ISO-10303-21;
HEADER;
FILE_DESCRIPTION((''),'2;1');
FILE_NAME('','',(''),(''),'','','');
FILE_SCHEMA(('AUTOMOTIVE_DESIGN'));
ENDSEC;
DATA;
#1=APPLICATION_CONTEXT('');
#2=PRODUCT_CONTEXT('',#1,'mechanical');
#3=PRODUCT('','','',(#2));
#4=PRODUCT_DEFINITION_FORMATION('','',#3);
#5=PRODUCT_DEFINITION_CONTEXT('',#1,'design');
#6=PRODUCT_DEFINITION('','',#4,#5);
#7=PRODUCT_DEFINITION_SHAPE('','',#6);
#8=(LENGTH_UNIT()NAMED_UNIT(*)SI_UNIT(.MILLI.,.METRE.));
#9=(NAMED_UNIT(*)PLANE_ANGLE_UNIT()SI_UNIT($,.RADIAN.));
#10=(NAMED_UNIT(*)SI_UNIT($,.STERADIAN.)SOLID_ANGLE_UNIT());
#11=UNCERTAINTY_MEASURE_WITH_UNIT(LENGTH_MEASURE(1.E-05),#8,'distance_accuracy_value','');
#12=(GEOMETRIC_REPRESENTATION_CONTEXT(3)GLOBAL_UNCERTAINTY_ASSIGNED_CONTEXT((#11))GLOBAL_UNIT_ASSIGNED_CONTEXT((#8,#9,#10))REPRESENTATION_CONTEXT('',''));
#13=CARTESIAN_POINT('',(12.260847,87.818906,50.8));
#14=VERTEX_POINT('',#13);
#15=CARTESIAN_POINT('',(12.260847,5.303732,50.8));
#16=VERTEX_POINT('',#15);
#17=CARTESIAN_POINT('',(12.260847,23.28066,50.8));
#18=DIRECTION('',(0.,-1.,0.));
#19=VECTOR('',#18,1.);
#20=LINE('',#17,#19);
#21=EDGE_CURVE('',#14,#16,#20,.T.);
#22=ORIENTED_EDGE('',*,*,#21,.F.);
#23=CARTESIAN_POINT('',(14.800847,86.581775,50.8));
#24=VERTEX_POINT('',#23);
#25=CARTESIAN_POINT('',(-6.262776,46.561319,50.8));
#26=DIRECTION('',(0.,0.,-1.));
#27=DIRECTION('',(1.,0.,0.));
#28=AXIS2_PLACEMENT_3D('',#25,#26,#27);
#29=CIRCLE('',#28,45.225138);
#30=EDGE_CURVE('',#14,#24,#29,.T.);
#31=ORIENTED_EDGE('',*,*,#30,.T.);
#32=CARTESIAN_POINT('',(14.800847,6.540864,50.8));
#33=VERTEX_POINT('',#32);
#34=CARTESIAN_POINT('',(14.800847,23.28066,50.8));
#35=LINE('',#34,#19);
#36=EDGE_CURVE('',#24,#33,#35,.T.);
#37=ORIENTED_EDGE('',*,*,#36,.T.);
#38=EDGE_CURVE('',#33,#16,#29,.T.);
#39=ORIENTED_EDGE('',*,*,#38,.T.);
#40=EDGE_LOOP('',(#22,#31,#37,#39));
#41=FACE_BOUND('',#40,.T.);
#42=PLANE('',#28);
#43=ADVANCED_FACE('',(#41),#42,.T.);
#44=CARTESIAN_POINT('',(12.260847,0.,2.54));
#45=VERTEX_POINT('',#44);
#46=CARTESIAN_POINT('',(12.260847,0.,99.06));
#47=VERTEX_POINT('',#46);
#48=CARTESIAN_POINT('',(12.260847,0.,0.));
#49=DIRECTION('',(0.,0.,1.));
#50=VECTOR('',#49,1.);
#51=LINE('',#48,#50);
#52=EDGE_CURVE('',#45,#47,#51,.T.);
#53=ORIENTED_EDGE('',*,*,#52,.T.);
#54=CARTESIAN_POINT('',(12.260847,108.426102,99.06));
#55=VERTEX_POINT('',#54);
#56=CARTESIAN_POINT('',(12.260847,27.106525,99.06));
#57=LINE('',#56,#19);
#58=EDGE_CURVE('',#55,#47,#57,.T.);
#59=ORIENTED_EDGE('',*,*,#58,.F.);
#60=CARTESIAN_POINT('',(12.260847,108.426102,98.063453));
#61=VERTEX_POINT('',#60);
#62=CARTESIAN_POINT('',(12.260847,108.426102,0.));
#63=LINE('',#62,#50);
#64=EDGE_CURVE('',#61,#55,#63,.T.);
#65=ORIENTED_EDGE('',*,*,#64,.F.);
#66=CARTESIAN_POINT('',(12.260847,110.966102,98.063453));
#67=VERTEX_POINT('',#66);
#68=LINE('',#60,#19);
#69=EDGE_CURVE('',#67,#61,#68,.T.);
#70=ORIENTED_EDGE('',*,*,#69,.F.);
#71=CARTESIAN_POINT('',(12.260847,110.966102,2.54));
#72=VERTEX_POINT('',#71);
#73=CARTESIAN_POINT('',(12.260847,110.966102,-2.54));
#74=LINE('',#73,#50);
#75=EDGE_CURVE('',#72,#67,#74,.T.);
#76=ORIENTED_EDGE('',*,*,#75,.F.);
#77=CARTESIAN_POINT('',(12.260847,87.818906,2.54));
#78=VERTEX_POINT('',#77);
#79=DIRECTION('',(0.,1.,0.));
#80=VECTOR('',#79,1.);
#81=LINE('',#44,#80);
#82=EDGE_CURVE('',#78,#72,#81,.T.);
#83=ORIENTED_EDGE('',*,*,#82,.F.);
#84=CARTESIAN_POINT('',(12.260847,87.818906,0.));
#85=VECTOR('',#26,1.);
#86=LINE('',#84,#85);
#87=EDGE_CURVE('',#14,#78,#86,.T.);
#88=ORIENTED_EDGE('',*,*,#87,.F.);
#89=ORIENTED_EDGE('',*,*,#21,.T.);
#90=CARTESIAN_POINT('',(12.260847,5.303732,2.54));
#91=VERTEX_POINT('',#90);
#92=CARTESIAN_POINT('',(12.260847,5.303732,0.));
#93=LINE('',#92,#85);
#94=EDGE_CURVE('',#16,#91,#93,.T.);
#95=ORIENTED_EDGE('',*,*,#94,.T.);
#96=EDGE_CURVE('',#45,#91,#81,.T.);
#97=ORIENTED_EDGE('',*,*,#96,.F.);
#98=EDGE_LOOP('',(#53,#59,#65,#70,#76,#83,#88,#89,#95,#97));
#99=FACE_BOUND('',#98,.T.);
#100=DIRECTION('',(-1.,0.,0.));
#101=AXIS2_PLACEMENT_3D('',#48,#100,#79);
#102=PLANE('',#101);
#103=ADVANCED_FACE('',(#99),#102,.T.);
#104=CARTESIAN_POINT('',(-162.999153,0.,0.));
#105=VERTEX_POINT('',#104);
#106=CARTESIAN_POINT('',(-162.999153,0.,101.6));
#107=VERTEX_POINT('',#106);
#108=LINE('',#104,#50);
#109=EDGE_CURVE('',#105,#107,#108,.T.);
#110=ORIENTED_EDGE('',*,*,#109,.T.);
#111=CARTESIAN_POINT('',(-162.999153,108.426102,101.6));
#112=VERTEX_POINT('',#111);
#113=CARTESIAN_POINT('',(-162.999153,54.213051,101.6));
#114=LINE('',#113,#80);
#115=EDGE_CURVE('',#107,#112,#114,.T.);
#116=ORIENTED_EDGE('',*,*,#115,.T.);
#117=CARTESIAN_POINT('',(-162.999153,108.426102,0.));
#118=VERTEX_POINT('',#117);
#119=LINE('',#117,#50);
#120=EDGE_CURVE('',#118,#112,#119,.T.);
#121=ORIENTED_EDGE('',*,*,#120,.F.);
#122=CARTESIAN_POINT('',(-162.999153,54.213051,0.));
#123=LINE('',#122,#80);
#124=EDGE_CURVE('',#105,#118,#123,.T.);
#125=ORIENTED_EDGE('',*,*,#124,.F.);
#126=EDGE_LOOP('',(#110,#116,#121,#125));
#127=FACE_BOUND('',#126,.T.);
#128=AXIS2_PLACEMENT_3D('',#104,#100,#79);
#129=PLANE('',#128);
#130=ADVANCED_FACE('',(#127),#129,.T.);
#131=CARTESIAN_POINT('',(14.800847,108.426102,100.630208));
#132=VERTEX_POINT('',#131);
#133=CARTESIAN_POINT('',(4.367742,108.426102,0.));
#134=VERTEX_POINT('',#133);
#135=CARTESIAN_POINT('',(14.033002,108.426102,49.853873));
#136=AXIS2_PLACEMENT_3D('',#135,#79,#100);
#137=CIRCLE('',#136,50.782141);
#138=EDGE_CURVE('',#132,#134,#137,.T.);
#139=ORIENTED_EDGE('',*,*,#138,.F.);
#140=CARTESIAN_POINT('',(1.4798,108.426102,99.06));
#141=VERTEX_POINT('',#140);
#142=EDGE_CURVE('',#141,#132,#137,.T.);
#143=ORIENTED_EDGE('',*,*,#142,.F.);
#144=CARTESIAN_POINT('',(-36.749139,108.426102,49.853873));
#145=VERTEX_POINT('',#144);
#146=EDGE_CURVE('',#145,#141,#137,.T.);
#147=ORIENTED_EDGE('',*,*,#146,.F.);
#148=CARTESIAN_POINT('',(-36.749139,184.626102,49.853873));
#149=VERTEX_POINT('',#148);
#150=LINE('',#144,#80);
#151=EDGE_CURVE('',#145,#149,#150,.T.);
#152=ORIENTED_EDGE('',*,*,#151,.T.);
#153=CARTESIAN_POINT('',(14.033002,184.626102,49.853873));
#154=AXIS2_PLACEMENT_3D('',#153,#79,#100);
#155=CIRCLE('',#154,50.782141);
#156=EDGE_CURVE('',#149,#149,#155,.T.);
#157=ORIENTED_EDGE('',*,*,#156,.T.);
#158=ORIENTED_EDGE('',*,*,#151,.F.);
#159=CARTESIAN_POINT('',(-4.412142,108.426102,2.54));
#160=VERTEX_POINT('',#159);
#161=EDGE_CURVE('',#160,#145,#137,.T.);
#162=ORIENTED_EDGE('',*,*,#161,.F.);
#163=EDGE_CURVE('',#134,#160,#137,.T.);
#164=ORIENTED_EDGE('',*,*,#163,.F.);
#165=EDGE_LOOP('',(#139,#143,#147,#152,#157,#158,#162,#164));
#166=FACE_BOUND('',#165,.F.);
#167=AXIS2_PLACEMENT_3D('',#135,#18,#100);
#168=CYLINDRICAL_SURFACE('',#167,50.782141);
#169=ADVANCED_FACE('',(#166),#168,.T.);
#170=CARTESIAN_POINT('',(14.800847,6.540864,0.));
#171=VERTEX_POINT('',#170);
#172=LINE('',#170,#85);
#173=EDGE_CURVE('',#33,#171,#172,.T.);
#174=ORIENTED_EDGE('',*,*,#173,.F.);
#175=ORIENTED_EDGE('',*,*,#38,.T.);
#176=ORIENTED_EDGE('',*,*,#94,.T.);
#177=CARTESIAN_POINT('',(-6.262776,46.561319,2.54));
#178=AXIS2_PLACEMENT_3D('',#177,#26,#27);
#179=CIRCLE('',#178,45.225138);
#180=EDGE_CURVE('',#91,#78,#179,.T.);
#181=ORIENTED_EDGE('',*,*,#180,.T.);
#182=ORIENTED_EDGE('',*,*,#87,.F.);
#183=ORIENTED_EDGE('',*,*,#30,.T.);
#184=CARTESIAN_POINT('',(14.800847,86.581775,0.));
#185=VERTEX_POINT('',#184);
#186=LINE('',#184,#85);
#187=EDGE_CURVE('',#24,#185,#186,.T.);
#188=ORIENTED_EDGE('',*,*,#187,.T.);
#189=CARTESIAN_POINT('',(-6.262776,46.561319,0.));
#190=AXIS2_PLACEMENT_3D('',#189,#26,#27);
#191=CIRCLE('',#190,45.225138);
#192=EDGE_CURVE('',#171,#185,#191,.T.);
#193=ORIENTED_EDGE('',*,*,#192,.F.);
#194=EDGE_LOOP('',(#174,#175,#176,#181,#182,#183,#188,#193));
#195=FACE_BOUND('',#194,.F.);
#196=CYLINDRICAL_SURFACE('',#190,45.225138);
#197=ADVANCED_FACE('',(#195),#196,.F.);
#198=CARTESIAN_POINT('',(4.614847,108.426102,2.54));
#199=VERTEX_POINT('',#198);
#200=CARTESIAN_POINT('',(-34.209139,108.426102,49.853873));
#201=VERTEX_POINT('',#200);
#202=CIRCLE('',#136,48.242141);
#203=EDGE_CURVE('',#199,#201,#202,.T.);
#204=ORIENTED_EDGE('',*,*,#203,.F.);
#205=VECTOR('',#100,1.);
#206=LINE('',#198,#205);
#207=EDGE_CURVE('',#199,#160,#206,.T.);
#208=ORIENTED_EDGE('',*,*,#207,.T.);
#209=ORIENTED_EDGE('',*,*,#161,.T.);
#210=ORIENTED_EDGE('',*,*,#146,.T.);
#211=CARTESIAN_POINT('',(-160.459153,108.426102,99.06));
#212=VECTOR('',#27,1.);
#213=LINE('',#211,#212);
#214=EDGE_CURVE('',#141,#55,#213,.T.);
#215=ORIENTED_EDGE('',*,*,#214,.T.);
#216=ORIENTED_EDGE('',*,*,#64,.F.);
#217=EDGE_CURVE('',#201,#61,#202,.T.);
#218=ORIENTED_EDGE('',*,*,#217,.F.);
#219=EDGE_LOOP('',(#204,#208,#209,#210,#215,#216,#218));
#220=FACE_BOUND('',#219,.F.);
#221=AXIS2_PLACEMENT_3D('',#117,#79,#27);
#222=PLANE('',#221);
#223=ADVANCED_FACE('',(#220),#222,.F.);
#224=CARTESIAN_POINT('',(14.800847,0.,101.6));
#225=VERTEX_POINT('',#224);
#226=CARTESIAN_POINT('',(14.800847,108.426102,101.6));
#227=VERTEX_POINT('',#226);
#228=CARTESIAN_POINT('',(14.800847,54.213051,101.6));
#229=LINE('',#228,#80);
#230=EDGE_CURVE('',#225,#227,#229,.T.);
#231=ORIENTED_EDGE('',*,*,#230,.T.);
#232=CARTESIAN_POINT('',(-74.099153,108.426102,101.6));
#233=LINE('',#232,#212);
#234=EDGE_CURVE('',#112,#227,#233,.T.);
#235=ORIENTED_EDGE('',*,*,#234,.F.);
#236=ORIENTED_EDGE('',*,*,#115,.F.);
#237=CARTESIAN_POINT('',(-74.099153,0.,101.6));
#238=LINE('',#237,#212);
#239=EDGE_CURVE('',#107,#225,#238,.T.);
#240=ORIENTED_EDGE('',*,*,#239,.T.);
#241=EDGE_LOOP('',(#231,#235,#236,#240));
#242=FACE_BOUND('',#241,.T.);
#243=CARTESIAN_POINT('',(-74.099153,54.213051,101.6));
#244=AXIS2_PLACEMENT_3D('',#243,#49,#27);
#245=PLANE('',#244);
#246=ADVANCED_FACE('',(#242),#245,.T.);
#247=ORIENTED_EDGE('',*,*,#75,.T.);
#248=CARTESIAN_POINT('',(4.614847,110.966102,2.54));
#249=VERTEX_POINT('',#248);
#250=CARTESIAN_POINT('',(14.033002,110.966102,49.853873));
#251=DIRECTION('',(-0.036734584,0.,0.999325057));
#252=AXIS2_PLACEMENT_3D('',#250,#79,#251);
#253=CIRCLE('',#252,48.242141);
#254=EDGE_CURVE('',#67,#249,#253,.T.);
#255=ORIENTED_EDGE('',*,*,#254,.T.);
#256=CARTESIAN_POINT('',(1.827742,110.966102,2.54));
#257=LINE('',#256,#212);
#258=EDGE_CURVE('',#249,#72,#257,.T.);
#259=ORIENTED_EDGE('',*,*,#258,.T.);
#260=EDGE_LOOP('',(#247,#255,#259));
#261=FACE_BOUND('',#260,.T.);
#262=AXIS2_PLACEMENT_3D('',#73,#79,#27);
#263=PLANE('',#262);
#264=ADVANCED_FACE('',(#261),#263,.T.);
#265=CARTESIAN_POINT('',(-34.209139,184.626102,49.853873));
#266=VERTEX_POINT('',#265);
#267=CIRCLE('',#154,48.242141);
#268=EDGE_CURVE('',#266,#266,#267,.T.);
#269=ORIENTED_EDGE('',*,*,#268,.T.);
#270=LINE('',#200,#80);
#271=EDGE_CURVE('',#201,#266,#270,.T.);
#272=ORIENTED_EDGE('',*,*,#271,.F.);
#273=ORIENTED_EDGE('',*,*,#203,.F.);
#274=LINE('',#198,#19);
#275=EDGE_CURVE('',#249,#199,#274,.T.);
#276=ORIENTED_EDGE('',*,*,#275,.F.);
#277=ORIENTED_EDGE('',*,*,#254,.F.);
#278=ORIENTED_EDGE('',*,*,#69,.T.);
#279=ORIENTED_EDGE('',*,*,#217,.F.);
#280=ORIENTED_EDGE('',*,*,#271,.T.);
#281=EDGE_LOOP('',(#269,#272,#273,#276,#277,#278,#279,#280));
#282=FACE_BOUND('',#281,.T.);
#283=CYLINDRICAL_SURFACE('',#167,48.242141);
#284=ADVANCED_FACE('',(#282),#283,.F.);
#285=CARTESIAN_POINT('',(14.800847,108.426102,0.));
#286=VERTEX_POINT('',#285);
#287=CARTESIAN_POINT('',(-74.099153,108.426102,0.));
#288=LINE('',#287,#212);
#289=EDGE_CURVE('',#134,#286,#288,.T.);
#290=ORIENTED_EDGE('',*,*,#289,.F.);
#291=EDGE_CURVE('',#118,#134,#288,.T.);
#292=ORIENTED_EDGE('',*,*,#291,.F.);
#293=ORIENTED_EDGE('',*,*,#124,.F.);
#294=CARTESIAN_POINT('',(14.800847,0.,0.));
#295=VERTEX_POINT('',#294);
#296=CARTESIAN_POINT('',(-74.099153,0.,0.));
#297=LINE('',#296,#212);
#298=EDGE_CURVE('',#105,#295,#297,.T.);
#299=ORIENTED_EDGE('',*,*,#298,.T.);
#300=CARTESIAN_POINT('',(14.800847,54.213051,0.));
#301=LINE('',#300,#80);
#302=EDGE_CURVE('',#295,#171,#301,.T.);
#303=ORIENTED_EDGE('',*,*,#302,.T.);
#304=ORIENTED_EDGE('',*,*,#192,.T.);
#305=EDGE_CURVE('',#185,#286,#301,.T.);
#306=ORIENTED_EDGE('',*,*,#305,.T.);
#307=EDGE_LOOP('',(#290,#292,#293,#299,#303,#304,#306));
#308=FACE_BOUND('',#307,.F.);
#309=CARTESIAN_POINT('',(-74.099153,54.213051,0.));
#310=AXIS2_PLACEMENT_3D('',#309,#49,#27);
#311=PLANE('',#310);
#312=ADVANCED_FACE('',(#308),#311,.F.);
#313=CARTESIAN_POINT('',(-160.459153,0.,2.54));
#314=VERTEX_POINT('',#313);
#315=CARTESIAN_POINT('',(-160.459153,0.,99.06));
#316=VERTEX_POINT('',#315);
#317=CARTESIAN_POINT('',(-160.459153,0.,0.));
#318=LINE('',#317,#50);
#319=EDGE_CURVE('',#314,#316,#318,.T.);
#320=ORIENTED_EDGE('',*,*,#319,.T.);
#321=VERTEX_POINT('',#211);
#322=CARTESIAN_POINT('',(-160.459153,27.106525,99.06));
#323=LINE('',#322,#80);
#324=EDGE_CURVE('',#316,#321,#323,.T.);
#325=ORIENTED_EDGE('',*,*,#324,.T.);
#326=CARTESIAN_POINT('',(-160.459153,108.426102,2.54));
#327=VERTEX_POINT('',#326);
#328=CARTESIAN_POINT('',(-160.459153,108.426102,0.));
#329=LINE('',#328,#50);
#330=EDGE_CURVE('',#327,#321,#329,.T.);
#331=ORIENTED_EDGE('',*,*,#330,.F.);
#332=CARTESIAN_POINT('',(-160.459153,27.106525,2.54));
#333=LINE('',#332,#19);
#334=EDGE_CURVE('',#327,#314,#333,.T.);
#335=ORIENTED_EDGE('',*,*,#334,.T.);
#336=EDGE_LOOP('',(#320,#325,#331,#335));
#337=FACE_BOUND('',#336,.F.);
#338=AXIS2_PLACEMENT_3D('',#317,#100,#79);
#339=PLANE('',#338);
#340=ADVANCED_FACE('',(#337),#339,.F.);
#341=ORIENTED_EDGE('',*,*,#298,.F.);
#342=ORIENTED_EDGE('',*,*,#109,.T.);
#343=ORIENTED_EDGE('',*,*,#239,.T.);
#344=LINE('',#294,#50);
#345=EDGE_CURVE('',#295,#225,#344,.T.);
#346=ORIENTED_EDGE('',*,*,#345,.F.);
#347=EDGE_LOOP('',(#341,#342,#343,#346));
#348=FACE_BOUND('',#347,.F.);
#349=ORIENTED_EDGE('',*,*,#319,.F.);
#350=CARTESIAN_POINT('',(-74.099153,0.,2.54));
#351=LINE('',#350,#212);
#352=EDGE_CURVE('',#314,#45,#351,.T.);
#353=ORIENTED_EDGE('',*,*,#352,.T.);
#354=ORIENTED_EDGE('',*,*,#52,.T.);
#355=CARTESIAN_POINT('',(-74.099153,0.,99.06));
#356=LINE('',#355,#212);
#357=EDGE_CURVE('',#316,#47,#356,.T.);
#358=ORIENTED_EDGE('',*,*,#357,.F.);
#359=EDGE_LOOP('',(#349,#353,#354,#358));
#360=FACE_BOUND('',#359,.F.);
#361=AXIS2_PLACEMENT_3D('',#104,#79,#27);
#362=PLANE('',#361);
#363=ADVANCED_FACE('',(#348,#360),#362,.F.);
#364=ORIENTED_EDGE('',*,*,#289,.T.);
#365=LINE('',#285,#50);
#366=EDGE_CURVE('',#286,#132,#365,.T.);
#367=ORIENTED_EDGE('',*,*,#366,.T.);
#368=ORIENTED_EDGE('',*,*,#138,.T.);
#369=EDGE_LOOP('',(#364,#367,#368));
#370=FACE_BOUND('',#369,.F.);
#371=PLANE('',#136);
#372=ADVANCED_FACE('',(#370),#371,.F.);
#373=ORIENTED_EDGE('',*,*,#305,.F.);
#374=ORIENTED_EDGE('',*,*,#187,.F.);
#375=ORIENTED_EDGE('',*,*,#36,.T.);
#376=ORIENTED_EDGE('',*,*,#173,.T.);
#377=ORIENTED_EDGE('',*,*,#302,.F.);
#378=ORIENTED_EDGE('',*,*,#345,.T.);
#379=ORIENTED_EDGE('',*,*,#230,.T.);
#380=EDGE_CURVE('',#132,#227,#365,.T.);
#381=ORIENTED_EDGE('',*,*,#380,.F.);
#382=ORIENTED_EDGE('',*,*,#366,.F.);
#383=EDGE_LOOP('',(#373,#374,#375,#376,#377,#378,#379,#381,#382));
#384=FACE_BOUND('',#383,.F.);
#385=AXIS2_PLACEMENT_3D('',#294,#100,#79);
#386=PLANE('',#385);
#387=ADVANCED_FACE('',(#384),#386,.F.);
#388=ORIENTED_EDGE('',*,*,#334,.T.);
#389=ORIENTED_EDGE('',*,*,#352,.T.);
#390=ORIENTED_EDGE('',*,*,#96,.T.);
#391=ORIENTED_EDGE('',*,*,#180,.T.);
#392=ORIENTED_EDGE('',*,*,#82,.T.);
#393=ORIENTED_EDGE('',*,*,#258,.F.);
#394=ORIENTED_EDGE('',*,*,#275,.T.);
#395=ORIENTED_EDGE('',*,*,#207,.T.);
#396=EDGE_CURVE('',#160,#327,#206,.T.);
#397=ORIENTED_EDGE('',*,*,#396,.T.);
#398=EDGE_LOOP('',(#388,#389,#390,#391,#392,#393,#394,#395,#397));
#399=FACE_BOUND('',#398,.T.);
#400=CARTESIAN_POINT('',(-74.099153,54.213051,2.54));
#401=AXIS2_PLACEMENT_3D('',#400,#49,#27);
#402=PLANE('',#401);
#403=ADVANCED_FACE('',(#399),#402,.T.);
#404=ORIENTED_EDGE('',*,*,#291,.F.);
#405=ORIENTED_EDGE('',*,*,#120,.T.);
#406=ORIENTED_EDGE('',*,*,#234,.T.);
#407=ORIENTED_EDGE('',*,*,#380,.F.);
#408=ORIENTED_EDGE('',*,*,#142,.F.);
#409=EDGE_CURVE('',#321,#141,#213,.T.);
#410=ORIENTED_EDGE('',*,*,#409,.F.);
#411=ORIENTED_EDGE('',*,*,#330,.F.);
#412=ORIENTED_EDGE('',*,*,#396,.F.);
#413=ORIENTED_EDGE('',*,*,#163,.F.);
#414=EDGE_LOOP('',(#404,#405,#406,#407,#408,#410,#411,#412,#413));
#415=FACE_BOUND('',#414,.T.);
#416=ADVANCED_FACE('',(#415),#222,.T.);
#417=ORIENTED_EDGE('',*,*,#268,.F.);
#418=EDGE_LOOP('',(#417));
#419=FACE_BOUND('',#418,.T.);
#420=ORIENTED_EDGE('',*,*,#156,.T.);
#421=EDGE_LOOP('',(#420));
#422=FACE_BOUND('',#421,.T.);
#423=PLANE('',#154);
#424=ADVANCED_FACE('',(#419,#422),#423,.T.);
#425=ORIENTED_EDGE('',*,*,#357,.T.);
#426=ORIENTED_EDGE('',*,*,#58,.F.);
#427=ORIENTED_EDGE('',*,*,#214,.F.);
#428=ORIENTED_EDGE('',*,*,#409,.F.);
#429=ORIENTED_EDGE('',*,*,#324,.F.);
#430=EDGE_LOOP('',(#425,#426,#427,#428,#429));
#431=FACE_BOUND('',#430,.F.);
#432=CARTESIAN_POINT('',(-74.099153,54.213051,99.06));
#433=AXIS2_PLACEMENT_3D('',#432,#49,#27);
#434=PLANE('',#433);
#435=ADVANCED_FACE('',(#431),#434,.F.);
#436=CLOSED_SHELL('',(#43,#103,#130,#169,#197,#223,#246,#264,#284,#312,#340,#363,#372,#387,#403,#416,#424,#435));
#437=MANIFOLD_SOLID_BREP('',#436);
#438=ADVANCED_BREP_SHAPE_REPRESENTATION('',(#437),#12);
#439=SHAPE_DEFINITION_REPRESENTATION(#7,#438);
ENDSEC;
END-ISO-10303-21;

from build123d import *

# Parameters (mm, degrees)
F0_W        = 177.8
F0_H        = 108.4261015058
F1_DEPTH    = 101.6
F2_R        = 50.7821410518
F3_DEPTH    = 76.2
F6_T        = 2.54
F6_T3_DEPTH = 15.513104752
F6_T5_DEPTH = 105.7102081755
F7_R        = 45.225137574
F8_DEPTH    = 50.8


# Not quite as in the source:
# - a feature of the source that left no trace in its solid (it failed there, or was rolled back) is left out
# - a shell that OpenCascade refuses in one call is made with other operations: the cavity is built on its own and cut out


with BuildPart() as f1:
    # F0 (on Top) → F1 (new body)
    with BuildSketch(Plane.XY):
        with Locations((-74.0991531372, 54.2130507529)):
            Rectangle(F0_W, F0_H)
    extrude(amount=F1_DEPTH)

    # F2 (on face) → F3 (join)
    with BuildSketch(Plane(origin=(0, 108.4261015058, 0), x_dir=(-1, 0, 0), z_dir=(0, 1, 0))):
        with Locations((-14.0330018476, 49.8538725078)):
            Circle(F2_R)
    extrude(amount=F3_DEPTH)

    # F6: shell of thickness 2.54, made by hand


with BuildPart() as f6_core1:
    # F6_t2: copy of F1
    add(f1.part)

    # the walls: a layer under each face that stays
    f6_faces = [f6_core1.faces().sort_by_distance(p)[0] for p in [
        (64.8151428994, 146.5261015058, 49.8538725078),
        (-74.0991531372, 54.2130507529, 0),
        (-162.9991531372, 54.2130507529, 50.8),
        (-74.0991531372, 54.2130507529, 101.6),
        (14.8008468628, 54.2130507529, 50.8),
        (34.5914425051, 108.4261015058, 49.8509698158),
    ]]
    thicken(f6_faces, amount=-F6_T, mode=Mode.SUBTRACT)

    # F6_s4 → F6_t3 (cut)
    with BuildSketch(Plane.YZ.offset(1.8277421108)):
        Polygon((108.4007015058, -0.0254), (108.4261015058, 2.54), (110.9661015058, 2.54), (110.9661015058, 0), align=None)
    extrude(amount=F6_T3_DEPTH, mode=Mode.SUBTRACT)

    # F6_s6 → F6_t5 (cut)
    with BuildSketch(Plane.XY.offset(-2.54)):
        Polygon((14.8262468628, 108.4007015058), (12.2608468628, 108.4261015058), (12.2608468628, 110.9661015058), (14.8008468628, 110.9661015058), align=None)
    extrude(amount=F6_T5_DEPTH, mode=Mode.SUBTRACT)


with BuildPart() as f1_1:
    add(f1.part)

    # what is left inside the walls is the cavity
    f6_cavity = [f6_core1.part.solids().sort_by_distance(p)[0] for p in [
        (62.249743, 159.226102, 49.853873),
    ]]
    add(f6_cavity, mode=Mode.SUBTRACT)

    # F7 (on face) → F8 (cut)
    with BuildSketch(Plane(origin=(0, 0, 0), x_dir=(1, 0, 0), z_dir=(0, 0, -1))):
        with Locations((-6.2627755105, -46.561319381)):
            Circle(F7_R)
    extrude(amount=-F8_DEPTH, mode=Mode.SUBTRACT)


solid = f1_1.part
